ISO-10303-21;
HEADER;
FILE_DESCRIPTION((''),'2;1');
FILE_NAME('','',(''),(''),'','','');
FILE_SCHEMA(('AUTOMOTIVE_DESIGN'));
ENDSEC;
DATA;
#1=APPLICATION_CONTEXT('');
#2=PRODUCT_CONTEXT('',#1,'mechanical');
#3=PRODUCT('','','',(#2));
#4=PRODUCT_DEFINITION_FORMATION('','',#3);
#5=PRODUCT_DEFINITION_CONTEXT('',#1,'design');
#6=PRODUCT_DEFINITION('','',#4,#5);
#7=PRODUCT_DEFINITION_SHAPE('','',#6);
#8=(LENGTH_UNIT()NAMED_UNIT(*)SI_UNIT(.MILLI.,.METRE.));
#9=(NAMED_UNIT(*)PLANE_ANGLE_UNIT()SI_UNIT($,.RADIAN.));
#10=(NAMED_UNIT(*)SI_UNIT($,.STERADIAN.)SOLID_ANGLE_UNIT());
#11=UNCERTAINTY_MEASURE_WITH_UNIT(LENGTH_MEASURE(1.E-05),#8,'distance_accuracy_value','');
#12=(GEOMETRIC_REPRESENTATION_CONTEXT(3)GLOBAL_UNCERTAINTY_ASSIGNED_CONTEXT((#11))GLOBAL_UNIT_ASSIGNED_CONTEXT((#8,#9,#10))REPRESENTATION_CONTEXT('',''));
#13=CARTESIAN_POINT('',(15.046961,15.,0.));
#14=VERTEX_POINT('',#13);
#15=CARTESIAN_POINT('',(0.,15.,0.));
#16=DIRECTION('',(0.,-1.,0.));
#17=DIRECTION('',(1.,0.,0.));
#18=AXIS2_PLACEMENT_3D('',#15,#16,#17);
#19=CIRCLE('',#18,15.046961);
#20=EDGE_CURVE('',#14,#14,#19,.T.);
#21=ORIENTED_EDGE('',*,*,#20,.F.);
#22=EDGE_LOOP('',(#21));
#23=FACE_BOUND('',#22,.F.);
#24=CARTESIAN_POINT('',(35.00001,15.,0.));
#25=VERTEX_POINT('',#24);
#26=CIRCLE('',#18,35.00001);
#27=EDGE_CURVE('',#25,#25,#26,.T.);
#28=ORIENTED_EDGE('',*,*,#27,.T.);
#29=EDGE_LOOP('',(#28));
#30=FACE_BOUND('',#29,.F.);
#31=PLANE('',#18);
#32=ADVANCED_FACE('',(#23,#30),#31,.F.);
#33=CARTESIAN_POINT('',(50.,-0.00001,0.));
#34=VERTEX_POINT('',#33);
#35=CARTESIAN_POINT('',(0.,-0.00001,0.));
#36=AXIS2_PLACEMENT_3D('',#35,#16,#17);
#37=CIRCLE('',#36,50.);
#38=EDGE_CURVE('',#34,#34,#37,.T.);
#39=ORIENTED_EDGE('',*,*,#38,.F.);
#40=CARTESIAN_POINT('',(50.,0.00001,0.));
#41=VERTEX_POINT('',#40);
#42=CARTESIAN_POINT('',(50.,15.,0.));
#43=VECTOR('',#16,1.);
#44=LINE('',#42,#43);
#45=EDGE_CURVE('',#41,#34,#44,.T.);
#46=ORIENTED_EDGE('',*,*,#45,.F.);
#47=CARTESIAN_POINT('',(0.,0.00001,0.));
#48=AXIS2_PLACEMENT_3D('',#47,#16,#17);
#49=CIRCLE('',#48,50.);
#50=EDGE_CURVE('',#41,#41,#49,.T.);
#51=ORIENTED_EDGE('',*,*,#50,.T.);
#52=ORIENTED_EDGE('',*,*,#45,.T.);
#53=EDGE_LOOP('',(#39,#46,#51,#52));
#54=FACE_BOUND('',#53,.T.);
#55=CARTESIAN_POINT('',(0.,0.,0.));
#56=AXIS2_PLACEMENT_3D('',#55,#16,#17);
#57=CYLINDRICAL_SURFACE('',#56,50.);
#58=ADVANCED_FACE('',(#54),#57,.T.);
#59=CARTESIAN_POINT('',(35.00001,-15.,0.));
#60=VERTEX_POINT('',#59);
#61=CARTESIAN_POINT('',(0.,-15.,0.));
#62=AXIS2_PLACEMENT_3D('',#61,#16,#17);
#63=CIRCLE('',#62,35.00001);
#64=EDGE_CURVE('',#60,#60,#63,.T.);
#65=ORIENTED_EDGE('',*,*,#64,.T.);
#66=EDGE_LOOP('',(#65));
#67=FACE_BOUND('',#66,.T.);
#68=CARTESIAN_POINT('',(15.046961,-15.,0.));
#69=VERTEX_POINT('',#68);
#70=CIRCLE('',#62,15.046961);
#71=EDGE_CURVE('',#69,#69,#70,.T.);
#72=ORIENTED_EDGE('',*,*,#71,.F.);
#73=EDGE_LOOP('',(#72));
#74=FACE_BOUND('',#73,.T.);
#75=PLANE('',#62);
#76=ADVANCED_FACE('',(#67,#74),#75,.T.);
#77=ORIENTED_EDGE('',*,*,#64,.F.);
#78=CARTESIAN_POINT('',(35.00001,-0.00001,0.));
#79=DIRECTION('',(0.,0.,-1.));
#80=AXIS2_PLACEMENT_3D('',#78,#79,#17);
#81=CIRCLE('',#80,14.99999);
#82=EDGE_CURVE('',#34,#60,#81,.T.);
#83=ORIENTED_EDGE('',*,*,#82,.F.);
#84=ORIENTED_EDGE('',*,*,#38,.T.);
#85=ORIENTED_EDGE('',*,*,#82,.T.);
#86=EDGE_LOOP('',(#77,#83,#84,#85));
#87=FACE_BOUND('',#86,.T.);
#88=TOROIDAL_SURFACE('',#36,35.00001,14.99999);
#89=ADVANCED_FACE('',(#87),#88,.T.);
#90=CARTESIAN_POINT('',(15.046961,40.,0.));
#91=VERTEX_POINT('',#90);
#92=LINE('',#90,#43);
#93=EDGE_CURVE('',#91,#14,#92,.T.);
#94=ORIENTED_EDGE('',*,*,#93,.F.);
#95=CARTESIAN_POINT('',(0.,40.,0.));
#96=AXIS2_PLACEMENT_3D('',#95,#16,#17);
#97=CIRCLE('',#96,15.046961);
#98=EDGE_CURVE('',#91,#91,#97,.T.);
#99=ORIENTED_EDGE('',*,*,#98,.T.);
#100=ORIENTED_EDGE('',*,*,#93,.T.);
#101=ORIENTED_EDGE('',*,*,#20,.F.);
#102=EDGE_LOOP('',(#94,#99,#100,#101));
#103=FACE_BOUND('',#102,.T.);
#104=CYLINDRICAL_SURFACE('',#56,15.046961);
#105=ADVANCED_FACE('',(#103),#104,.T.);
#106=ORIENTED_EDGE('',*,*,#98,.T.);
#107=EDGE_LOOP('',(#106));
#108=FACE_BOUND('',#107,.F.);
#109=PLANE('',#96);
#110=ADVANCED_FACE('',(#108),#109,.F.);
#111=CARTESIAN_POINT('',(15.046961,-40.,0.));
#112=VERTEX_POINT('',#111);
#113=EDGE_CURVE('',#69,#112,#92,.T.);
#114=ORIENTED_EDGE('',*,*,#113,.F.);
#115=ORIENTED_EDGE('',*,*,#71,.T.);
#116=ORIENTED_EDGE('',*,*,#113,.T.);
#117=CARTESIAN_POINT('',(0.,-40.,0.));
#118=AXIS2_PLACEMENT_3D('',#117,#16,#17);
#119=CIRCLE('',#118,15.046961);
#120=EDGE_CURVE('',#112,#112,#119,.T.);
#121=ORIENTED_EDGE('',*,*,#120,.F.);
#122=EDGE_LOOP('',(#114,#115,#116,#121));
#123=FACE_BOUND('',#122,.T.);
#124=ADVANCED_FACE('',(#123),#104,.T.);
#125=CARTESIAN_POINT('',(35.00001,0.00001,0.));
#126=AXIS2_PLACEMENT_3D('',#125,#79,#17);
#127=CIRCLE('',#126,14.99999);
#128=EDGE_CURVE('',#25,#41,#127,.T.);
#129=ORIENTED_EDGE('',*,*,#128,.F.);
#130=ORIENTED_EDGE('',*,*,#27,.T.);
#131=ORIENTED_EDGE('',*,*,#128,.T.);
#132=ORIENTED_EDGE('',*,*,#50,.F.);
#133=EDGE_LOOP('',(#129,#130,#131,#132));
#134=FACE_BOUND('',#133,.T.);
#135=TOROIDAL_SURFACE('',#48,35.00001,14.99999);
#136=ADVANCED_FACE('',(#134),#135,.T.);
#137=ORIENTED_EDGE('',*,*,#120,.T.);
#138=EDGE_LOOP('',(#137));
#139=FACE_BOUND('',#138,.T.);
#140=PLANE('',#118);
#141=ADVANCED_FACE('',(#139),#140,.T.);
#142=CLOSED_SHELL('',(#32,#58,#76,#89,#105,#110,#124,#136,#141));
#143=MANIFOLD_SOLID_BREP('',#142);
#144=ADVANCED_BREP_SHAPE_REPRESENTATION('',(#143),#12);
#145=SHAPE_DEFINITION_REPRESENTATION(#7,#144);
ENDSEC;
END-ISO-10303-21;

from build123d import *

# Parameters (mm, degrees)
F0_R     = 15.046961384
F1_DEPTH = 40
F0_R_2   = 50
F2_DEPTH = 15
F3_R     = 14.99999


# Not quite as in the source:
# - a fillet or chamfer is up to 0.001 mm smaller than in the source, because OpenCascade refuses the exact size


with BuildPart() as f1:
    # F0 (on Front) → F1 (new body, symmetric)
    with BuildSketch(Plane.XZ):
        Circle(F0_R)
    extrude(amount=F1_DEPTH, both=True)

    # F0 (on Front) → F2 (join, symmetric)
    with BuildSketch(Plane.XZ):
        Circle(F0_R_2)
        Circle(F0_R, mode=Mode.SUBTRACT)
    extrude(amount=F2_DEPTH, both=True)

    # F3 (radius 15 in the source; OpenCascade refuses exactly that, so slightly less here)
    f3_edges = [f1.edges().sort_by_distance(p)[0] for p in [
        (-50, -15, 0),
        (-50, 15, 0),
    ]]
    fillet(f3_edges, radius=F3_R)


solid = f1.part
